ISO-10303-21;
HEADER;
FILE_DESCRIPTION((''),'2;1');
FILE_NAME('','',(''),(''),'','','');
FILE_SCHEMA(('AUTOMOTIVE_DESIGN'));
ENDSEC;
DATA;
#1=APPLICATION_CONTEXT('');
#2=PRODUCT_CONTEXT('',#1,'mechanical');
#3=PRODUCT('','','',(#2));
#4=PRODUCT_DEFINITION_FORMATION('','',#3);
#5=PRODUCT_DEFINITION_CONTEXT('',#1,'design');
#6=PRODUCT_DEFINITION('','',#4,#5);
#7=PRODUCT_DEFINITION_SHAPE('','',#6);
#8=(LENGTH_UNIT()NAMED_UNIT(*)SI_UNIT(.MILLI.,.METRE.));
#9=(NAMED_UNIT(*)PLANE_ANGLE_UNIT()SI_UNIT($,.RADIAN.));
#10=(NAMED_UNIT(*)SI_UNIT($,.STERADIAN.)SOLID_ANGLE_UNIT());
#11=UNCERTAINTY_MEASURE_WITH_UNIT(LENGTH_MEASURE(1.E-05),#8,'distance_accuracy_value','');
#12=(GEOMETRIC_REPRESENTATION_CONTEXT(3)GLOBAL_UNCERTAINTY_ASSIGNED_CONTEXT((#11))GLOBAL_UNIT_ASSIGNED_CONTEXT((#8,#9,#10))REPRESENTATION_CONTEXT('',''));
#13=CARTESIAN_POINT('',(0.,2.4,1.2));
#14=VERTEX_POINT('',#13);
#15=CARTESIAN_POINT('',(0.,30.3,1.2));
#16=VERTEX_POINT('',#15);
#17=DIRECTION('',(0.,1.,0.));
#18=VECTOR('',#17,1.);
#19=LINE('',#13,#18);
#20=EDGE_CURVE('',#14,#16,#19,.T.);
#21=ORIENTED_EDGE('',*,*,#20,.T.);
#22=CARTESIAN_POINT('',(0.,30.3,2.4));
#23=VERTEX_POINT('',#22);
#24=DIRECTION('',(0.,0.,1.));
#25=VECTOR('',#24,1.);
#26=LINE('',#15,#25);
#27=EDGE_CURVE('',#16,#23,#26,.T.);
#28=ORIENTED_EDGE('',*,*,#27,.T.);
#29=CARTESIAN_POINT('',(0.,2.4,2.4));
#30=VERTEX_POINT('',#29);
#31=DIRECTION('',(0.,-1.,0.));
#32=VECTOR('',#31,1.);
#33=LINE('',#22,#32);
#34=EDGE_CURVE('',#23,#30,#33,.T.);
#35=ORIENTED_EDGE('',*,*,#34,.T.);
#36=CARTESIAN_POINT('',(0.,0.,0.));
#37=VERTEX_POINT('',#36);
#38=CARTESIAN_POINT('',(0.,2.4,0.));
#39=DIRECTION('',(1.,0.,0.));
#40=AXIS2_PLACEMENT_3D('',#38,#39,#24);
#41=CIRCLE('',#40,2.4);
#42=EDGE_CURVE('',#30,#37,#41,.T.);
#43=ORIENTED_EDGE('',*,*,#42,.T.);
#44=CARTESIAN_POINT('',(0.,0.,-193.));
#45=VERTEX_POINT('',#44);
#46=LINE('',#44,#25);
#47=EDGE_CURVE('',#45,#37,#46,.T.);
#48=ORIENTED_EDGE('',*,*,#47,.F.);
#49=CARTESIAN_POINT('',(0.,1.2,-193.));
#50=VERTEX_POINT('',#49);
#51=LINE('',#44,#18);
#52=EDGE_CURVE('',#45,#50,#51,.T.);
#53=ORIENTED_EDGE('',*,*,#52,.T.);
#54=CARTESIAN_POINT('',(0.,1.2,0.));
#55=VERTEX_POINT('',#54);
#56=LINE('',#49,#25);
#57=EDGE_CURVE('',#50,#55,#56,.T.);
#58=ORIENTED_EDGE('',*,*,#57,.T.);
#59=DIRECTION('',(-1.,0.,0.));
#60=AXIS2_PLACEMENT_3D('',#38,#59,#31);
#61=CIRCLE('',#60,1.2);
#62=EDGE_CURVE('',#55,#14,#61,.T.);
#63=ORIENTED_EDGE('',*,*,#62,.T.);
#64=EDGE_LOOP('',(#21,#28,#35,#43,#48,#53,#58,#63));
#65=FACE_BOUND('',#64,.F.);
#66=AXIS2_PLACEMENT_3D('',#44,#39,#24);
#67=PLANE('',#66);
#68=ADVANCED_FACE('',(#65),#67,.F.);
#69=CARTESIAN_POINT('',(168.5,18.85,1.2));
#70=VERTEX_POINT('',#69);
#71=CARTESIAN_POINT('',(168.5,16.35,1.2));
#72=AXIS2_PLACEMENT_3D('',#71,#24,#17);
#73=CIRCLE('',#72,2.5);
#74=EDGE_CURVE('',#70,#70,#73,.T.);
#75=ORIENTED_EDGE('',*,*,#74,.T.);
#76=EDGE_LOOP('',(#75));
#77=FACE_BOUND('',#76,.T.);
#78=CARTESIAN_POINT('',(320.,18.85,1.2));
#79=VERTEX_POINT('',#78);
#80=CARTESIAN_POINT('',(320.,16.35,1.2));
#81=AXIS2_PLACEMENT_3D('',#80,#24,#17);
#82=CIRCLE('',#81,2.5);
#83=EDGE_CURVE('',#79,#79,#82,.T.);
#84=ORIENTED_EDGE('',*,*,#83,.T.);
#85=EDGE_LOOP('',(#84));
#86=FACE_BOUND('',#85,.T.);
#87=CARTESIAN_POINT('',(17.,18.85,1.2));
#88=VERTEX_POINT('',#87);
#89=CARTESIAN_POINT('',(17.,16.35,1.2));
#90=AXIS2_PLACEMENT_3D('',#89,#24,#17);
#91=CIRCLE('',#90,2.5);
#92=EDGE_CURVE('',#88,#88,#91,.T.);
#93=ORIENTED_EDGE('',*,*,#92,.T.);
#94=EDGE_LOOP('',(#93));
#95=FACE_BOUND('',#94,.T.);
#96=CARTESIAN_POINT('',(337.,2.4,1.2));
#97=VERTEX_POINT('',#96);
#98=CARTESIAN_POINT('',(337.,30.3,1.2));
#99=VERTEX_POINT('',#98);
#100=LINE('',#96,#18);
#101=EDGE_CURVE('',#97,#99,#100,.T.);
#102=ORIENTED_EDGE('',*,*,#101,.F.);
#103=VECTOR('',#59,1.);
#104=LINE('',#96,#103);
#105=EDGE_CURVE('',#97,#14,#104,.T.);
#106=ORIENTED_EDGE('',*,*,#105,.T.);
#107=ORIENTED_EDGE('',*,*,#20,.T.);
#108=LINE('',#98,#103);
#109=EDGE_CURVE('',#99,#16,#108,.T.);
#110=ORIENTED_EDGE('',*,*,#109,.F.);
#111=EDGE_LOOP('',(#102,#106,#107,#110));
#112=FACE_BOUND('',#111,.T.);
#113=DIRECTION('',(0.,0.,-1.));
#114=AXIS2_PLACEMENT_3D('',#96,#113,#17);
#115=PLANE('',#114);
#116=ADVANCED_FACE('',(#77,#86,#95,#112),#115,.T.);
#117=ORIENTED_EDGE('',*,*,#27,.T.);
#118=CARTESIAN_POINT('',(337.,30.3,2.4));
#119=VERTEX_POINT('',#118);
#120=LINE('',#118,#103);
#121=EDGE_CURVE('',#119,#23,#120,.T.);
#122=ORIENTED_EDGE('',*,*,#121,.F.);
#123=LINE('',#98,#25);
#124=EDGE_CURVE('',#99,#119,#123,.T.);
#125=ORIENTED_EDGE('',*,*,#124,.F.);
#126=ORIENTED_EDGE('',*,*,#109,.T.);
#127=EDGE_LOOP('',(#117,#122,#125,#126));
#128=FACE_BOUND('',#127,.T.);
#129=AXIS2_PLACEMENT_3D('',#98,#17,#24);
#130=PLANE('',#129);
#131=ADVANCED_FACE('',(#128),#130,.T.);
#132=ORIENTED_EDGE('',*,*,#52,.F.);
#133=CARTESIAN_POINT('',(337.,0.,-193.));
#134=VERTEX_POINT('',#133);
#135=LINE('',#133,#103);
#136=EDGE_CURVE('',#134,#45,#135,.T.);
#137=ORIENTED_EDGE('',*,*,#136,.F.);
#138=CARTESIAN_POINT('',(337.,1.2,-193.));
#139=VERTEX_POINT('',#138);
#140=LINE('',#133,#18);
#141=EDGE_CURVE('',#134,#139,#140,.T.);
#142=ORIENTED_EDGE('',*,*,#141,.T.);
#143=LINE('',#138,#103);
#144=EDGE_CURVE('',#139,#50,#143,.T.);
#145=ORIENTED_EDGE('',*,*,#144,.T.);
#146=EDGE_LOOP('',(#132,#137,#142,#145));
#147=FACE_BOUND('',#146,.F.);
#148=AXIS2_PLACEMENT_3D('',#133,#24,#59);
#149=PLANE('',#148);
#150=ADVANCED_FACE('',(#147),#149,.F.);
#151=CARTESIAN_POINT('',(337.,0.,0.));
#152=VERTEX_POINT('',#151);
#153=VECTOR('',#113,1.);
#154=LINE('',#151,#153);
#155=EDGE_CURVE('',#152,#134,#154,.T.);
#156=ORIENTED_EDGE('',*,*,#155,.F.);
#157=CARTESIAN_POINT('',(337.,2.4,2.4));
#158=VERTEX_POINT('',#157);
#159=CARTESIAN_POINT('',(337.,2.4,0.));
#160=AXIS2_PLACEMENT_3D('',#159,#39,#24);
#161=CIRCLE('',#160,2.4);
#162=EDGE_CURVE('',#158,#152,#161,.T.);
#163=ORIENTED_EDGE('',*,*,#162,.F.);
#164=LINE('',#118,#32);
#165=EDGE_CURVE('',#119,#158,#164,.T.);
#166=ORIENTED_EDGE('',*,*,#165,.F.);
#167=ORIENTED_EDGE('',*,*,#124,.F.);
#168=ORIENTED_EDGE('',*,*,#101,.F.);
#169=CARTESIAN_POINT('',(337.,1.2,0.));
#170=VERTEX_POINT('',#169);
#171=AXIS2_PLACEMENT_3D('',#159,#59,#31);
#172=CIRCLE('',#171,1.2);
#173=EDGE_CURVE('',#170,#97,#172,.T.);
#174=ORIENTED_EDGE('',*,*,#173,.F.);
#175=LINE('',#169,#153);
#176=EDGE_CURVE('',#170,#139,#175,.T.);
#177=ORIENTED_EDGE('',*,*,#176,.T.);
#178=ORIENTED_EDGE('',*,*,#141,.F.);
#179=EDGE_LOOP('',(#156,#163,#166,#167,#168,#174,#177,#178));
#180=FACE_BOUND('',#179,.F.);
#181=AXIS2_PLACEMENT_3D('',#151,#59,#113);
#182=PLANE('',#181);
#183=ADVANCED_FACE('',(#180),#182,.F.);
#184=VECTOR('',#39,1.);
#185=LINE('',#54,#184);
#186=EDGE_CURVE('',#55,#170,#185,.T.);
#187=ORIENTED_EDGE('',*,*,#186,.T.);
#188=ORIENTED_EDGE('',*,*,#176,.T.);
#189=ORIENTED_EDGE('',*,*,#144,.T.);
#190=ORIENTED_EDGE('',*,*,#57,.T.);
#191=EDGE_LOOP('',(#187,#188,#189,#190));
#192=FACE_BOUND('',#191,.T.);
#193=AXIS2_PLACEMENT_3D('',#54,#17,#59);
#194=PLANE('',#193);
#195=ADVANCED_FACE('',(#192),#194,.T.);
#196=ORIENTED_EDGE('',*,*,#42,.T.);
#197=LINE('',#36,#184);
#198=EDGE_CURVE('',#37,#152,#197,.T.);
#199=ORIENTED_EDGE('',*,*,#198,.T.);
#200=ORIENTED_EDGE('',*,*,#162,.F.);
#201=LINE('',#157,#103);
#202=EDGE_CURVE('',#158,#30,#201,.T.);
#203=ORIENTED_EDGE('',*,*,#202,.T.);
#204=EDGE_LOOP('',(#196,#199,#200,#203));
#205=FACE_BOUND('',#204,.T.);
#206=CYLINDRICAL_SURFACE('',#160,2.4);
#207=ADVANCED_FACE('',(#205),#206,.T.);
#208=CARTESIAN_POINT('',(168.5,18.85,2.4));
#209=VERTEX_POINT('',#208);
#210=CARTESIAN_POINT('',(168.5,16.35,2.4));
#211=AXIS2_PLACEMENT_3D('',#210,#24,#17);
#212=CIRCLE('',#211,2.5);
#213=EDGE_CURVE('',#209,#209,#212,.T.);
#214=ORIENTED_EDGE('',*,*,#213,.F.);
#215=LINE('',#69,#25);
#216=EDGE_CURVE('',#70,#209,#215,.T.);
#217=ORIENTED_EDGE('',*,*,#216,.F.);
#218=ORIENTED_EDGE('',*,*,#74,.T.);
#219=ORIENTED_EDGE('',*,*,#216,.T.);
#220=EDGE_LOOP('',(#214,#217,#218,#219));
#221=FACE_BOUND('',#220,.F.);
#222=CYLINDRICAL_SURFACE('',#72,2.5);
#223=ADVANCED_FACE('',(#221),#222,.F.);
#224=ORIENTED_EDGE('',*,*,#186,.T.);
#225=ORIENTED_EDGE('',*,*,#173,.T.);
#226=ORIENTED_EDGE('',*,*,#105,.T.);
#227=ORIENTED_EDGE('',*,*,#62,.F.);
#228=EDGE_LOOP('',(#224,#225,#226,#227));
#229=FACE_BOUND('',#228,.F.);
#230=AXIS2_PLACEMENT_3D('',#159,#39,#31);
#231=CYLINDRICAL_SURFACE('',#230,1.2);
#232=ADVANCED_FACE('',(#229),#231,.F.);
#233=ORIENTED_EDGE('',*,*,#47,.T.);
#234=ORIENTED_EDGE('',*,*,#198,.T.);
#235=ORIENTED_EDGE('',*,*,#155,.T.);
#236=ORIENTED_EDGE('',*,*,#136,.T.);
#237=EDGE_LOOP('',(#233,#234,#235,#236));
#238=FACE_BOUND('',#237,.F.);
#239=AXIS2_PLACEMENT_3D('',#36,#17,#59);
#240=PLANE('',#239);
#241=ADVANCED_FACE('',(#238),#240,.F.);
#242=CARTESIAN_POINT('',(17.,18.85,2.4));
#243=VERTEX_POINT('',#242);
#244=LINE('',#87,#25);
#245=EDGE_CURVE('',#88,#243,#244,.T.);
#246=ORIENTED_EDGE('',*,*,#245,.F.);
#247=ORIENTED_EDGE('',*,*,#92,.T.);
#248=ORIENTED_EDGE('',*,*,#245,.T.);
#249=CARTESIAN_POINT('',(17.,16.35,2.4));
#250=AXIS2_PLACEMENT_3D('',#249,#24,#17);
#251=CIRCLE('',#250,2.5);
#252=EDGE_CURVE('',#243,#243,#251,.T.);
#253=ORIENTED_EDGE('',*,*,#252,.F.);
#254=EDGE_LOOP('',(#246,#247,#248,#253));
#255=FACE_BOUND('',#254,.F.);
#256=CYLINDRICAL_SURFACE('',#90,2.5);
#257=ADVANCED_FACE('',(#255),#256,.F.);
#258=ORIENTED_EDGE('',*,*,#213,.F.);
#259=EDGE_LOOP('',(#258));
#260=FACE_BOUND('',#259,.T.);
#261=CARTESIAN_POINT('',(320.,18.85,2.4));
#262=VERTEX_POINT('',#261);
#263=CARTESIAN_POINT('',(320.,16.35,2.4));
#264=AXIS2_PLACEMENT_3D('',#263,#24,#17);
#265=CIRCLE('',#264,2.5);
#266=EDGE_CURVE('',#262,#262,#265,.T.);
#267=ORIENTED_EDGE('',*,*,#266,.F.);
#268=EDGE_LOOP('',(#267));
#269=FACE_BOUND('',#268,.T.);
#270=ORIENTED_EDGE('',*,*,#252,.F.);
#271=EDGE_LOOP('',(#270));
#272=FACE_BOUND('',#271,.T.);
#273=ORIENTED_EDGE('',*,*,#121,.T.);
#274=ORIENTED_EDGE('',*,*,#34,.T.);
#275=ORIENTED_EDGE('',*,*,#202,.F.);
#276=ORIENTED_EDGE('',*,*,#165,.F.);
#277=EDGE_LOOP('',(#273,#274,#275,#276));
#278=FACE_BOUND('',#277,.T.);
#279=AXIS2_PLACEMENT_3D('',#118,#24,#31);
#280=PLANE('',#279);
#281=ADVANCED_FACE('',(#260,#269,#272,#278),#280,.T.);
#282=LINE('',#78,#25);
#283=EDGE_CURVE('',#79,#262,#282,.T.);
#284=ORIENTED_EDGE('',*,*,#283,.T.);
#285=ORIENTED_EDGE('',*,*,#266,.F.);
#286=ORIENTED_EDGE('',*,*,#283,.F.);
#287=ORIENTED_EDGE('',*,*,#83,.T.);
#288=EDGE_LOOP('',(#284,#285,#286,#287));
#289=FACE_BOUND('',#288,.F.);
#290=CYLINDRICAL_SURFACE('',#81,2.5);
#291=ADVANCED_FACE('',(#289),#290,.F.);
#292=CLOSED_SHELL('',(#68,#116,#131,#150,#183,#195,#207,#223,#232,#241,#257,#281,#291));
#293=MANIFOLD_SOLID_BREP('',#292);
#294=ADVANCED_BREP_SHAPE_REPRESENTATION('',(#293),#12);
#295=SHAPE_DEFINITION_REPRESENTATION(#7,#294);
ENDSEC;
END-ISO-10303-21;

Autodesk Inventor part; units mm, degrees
ref_plane "YZ Plane" through (0, 0, 0) normal (1, 0, 0) x (0, 1, 0)
ref_plane "XZ Plane" through (0, 0, 0) normal (0, 1, 0) x (-1, 0, 0)
ref_plane "XY Plane" through (0, 0, 0) normal (0, 0, 1) x (1, 0, 0)
sketch "Sketch2" plane through (0, 0, 0) normal (0, 1, 0) x (-1, 0, 0)
  line L0 (0, 0) -> (-337, 0)
  line L1 (-337, 0) -> (-337, -193)
  line L2 (-337, -193) -> (0, -193)
  line L3 (0, -193) -> (0, 0)
  dimension "d3" = 337
  dimension "d4" = 193
extrude "Plate1" add sketch "Sketch2" along normal blind 1.2
sketch "Sketch3" plane through (337, 2.4, 1.2) normal (0, 0, 1) x (1, 0, 0)
  line L0 (-337, 0) -> (0, 0)
  line L1 (0, 0) -> (0, 27.9)
  line L2 (0, 27.9) -> (-337, 27.9)
  line L3 (-337, 27.9) -> (-337, 0)
edge flange "Flange1" height 30.3 angle 90 thickness 1.2 bend radius 1.2 thickness toward (0, 0, 1) relief tear relief width 1.2 relief depth 0.6 edges at (168.5, 1.2, 0) wall of the first edge with corners at (0, 2.4, 1.2) (337, 2.4, 1.2) (337, 30.3, 1.2) (0, 30.3, 1.2)
bend "Bend1"
corner "Corner1"
sketch "Sketch4" plane through (337, 30.3, 1.2) normal (0, 0, -1) x (-1, 0, 0)
  line L0 (337, 0) -> (337, -27.9) projected
  line L1 (0, 0) -> (0, -27.9) projected
  line L2 (337, 0) -> (0, 0) projected
  point P0 (337, -30.3)
  point P1 (320, -13.95)
  point P2 (168.5, -13.95)
  point P3 (17, -13.95)
  dimension "d16" = 17
  dimension "d17" = 17
  dimension "d18" = 151.5
  dimension "d19" = 13.95
  dimension "d20" = 13.95
  dimension "d21" = 13.95
hole "Hole1" at (17, 16.35, 1.2) at (168.5, 16.35, 1.2) at (320, 16.35, 1.2) direction (0, 0, 1) diameter 5 depth 1.2 tip angle 118
equation "\"d17\" = d16"
equation "\"d20\" = d19"
equation "\"d21\" = d19"
equation "\"d27\" = Thickness"
equation "\"d5\" = Thickness"
equation "\"d6\" = BendReliefWidth"
equation "\"d7\" = BendReliefDepth"
equation "\"d8\" = MinimumRemnant"
equation "\"d9\" = TransitionRadius"
equation "\"d12\" = BendRadius"
equation "\"d13\" = CornerReliefSize"
equation "\"d14\" = GapSize"
equation "\"d15\" = JacobiRadiusSize"
equation "\"BendRadius\" = Thickness"
equation "\"BendReliefWidth\" = Thickness"
equation "\"BendReliefDepth\" = 0.5 * Thickness"
equation "\"CornerReliefSize\" = 4 * Thickness"
equation "\"MinimumRemnant\" = 2 * Thickness"
equation "\"TransitionRadius\" = BendRadius"
equation "\"JacobiRadiusSize\" = BendRadius"
equation "\"GapSize\" = Thickness"
equation "\"Thickness\" = 1.2"
properties part number "Separador" material "Steel ASTM A36"
